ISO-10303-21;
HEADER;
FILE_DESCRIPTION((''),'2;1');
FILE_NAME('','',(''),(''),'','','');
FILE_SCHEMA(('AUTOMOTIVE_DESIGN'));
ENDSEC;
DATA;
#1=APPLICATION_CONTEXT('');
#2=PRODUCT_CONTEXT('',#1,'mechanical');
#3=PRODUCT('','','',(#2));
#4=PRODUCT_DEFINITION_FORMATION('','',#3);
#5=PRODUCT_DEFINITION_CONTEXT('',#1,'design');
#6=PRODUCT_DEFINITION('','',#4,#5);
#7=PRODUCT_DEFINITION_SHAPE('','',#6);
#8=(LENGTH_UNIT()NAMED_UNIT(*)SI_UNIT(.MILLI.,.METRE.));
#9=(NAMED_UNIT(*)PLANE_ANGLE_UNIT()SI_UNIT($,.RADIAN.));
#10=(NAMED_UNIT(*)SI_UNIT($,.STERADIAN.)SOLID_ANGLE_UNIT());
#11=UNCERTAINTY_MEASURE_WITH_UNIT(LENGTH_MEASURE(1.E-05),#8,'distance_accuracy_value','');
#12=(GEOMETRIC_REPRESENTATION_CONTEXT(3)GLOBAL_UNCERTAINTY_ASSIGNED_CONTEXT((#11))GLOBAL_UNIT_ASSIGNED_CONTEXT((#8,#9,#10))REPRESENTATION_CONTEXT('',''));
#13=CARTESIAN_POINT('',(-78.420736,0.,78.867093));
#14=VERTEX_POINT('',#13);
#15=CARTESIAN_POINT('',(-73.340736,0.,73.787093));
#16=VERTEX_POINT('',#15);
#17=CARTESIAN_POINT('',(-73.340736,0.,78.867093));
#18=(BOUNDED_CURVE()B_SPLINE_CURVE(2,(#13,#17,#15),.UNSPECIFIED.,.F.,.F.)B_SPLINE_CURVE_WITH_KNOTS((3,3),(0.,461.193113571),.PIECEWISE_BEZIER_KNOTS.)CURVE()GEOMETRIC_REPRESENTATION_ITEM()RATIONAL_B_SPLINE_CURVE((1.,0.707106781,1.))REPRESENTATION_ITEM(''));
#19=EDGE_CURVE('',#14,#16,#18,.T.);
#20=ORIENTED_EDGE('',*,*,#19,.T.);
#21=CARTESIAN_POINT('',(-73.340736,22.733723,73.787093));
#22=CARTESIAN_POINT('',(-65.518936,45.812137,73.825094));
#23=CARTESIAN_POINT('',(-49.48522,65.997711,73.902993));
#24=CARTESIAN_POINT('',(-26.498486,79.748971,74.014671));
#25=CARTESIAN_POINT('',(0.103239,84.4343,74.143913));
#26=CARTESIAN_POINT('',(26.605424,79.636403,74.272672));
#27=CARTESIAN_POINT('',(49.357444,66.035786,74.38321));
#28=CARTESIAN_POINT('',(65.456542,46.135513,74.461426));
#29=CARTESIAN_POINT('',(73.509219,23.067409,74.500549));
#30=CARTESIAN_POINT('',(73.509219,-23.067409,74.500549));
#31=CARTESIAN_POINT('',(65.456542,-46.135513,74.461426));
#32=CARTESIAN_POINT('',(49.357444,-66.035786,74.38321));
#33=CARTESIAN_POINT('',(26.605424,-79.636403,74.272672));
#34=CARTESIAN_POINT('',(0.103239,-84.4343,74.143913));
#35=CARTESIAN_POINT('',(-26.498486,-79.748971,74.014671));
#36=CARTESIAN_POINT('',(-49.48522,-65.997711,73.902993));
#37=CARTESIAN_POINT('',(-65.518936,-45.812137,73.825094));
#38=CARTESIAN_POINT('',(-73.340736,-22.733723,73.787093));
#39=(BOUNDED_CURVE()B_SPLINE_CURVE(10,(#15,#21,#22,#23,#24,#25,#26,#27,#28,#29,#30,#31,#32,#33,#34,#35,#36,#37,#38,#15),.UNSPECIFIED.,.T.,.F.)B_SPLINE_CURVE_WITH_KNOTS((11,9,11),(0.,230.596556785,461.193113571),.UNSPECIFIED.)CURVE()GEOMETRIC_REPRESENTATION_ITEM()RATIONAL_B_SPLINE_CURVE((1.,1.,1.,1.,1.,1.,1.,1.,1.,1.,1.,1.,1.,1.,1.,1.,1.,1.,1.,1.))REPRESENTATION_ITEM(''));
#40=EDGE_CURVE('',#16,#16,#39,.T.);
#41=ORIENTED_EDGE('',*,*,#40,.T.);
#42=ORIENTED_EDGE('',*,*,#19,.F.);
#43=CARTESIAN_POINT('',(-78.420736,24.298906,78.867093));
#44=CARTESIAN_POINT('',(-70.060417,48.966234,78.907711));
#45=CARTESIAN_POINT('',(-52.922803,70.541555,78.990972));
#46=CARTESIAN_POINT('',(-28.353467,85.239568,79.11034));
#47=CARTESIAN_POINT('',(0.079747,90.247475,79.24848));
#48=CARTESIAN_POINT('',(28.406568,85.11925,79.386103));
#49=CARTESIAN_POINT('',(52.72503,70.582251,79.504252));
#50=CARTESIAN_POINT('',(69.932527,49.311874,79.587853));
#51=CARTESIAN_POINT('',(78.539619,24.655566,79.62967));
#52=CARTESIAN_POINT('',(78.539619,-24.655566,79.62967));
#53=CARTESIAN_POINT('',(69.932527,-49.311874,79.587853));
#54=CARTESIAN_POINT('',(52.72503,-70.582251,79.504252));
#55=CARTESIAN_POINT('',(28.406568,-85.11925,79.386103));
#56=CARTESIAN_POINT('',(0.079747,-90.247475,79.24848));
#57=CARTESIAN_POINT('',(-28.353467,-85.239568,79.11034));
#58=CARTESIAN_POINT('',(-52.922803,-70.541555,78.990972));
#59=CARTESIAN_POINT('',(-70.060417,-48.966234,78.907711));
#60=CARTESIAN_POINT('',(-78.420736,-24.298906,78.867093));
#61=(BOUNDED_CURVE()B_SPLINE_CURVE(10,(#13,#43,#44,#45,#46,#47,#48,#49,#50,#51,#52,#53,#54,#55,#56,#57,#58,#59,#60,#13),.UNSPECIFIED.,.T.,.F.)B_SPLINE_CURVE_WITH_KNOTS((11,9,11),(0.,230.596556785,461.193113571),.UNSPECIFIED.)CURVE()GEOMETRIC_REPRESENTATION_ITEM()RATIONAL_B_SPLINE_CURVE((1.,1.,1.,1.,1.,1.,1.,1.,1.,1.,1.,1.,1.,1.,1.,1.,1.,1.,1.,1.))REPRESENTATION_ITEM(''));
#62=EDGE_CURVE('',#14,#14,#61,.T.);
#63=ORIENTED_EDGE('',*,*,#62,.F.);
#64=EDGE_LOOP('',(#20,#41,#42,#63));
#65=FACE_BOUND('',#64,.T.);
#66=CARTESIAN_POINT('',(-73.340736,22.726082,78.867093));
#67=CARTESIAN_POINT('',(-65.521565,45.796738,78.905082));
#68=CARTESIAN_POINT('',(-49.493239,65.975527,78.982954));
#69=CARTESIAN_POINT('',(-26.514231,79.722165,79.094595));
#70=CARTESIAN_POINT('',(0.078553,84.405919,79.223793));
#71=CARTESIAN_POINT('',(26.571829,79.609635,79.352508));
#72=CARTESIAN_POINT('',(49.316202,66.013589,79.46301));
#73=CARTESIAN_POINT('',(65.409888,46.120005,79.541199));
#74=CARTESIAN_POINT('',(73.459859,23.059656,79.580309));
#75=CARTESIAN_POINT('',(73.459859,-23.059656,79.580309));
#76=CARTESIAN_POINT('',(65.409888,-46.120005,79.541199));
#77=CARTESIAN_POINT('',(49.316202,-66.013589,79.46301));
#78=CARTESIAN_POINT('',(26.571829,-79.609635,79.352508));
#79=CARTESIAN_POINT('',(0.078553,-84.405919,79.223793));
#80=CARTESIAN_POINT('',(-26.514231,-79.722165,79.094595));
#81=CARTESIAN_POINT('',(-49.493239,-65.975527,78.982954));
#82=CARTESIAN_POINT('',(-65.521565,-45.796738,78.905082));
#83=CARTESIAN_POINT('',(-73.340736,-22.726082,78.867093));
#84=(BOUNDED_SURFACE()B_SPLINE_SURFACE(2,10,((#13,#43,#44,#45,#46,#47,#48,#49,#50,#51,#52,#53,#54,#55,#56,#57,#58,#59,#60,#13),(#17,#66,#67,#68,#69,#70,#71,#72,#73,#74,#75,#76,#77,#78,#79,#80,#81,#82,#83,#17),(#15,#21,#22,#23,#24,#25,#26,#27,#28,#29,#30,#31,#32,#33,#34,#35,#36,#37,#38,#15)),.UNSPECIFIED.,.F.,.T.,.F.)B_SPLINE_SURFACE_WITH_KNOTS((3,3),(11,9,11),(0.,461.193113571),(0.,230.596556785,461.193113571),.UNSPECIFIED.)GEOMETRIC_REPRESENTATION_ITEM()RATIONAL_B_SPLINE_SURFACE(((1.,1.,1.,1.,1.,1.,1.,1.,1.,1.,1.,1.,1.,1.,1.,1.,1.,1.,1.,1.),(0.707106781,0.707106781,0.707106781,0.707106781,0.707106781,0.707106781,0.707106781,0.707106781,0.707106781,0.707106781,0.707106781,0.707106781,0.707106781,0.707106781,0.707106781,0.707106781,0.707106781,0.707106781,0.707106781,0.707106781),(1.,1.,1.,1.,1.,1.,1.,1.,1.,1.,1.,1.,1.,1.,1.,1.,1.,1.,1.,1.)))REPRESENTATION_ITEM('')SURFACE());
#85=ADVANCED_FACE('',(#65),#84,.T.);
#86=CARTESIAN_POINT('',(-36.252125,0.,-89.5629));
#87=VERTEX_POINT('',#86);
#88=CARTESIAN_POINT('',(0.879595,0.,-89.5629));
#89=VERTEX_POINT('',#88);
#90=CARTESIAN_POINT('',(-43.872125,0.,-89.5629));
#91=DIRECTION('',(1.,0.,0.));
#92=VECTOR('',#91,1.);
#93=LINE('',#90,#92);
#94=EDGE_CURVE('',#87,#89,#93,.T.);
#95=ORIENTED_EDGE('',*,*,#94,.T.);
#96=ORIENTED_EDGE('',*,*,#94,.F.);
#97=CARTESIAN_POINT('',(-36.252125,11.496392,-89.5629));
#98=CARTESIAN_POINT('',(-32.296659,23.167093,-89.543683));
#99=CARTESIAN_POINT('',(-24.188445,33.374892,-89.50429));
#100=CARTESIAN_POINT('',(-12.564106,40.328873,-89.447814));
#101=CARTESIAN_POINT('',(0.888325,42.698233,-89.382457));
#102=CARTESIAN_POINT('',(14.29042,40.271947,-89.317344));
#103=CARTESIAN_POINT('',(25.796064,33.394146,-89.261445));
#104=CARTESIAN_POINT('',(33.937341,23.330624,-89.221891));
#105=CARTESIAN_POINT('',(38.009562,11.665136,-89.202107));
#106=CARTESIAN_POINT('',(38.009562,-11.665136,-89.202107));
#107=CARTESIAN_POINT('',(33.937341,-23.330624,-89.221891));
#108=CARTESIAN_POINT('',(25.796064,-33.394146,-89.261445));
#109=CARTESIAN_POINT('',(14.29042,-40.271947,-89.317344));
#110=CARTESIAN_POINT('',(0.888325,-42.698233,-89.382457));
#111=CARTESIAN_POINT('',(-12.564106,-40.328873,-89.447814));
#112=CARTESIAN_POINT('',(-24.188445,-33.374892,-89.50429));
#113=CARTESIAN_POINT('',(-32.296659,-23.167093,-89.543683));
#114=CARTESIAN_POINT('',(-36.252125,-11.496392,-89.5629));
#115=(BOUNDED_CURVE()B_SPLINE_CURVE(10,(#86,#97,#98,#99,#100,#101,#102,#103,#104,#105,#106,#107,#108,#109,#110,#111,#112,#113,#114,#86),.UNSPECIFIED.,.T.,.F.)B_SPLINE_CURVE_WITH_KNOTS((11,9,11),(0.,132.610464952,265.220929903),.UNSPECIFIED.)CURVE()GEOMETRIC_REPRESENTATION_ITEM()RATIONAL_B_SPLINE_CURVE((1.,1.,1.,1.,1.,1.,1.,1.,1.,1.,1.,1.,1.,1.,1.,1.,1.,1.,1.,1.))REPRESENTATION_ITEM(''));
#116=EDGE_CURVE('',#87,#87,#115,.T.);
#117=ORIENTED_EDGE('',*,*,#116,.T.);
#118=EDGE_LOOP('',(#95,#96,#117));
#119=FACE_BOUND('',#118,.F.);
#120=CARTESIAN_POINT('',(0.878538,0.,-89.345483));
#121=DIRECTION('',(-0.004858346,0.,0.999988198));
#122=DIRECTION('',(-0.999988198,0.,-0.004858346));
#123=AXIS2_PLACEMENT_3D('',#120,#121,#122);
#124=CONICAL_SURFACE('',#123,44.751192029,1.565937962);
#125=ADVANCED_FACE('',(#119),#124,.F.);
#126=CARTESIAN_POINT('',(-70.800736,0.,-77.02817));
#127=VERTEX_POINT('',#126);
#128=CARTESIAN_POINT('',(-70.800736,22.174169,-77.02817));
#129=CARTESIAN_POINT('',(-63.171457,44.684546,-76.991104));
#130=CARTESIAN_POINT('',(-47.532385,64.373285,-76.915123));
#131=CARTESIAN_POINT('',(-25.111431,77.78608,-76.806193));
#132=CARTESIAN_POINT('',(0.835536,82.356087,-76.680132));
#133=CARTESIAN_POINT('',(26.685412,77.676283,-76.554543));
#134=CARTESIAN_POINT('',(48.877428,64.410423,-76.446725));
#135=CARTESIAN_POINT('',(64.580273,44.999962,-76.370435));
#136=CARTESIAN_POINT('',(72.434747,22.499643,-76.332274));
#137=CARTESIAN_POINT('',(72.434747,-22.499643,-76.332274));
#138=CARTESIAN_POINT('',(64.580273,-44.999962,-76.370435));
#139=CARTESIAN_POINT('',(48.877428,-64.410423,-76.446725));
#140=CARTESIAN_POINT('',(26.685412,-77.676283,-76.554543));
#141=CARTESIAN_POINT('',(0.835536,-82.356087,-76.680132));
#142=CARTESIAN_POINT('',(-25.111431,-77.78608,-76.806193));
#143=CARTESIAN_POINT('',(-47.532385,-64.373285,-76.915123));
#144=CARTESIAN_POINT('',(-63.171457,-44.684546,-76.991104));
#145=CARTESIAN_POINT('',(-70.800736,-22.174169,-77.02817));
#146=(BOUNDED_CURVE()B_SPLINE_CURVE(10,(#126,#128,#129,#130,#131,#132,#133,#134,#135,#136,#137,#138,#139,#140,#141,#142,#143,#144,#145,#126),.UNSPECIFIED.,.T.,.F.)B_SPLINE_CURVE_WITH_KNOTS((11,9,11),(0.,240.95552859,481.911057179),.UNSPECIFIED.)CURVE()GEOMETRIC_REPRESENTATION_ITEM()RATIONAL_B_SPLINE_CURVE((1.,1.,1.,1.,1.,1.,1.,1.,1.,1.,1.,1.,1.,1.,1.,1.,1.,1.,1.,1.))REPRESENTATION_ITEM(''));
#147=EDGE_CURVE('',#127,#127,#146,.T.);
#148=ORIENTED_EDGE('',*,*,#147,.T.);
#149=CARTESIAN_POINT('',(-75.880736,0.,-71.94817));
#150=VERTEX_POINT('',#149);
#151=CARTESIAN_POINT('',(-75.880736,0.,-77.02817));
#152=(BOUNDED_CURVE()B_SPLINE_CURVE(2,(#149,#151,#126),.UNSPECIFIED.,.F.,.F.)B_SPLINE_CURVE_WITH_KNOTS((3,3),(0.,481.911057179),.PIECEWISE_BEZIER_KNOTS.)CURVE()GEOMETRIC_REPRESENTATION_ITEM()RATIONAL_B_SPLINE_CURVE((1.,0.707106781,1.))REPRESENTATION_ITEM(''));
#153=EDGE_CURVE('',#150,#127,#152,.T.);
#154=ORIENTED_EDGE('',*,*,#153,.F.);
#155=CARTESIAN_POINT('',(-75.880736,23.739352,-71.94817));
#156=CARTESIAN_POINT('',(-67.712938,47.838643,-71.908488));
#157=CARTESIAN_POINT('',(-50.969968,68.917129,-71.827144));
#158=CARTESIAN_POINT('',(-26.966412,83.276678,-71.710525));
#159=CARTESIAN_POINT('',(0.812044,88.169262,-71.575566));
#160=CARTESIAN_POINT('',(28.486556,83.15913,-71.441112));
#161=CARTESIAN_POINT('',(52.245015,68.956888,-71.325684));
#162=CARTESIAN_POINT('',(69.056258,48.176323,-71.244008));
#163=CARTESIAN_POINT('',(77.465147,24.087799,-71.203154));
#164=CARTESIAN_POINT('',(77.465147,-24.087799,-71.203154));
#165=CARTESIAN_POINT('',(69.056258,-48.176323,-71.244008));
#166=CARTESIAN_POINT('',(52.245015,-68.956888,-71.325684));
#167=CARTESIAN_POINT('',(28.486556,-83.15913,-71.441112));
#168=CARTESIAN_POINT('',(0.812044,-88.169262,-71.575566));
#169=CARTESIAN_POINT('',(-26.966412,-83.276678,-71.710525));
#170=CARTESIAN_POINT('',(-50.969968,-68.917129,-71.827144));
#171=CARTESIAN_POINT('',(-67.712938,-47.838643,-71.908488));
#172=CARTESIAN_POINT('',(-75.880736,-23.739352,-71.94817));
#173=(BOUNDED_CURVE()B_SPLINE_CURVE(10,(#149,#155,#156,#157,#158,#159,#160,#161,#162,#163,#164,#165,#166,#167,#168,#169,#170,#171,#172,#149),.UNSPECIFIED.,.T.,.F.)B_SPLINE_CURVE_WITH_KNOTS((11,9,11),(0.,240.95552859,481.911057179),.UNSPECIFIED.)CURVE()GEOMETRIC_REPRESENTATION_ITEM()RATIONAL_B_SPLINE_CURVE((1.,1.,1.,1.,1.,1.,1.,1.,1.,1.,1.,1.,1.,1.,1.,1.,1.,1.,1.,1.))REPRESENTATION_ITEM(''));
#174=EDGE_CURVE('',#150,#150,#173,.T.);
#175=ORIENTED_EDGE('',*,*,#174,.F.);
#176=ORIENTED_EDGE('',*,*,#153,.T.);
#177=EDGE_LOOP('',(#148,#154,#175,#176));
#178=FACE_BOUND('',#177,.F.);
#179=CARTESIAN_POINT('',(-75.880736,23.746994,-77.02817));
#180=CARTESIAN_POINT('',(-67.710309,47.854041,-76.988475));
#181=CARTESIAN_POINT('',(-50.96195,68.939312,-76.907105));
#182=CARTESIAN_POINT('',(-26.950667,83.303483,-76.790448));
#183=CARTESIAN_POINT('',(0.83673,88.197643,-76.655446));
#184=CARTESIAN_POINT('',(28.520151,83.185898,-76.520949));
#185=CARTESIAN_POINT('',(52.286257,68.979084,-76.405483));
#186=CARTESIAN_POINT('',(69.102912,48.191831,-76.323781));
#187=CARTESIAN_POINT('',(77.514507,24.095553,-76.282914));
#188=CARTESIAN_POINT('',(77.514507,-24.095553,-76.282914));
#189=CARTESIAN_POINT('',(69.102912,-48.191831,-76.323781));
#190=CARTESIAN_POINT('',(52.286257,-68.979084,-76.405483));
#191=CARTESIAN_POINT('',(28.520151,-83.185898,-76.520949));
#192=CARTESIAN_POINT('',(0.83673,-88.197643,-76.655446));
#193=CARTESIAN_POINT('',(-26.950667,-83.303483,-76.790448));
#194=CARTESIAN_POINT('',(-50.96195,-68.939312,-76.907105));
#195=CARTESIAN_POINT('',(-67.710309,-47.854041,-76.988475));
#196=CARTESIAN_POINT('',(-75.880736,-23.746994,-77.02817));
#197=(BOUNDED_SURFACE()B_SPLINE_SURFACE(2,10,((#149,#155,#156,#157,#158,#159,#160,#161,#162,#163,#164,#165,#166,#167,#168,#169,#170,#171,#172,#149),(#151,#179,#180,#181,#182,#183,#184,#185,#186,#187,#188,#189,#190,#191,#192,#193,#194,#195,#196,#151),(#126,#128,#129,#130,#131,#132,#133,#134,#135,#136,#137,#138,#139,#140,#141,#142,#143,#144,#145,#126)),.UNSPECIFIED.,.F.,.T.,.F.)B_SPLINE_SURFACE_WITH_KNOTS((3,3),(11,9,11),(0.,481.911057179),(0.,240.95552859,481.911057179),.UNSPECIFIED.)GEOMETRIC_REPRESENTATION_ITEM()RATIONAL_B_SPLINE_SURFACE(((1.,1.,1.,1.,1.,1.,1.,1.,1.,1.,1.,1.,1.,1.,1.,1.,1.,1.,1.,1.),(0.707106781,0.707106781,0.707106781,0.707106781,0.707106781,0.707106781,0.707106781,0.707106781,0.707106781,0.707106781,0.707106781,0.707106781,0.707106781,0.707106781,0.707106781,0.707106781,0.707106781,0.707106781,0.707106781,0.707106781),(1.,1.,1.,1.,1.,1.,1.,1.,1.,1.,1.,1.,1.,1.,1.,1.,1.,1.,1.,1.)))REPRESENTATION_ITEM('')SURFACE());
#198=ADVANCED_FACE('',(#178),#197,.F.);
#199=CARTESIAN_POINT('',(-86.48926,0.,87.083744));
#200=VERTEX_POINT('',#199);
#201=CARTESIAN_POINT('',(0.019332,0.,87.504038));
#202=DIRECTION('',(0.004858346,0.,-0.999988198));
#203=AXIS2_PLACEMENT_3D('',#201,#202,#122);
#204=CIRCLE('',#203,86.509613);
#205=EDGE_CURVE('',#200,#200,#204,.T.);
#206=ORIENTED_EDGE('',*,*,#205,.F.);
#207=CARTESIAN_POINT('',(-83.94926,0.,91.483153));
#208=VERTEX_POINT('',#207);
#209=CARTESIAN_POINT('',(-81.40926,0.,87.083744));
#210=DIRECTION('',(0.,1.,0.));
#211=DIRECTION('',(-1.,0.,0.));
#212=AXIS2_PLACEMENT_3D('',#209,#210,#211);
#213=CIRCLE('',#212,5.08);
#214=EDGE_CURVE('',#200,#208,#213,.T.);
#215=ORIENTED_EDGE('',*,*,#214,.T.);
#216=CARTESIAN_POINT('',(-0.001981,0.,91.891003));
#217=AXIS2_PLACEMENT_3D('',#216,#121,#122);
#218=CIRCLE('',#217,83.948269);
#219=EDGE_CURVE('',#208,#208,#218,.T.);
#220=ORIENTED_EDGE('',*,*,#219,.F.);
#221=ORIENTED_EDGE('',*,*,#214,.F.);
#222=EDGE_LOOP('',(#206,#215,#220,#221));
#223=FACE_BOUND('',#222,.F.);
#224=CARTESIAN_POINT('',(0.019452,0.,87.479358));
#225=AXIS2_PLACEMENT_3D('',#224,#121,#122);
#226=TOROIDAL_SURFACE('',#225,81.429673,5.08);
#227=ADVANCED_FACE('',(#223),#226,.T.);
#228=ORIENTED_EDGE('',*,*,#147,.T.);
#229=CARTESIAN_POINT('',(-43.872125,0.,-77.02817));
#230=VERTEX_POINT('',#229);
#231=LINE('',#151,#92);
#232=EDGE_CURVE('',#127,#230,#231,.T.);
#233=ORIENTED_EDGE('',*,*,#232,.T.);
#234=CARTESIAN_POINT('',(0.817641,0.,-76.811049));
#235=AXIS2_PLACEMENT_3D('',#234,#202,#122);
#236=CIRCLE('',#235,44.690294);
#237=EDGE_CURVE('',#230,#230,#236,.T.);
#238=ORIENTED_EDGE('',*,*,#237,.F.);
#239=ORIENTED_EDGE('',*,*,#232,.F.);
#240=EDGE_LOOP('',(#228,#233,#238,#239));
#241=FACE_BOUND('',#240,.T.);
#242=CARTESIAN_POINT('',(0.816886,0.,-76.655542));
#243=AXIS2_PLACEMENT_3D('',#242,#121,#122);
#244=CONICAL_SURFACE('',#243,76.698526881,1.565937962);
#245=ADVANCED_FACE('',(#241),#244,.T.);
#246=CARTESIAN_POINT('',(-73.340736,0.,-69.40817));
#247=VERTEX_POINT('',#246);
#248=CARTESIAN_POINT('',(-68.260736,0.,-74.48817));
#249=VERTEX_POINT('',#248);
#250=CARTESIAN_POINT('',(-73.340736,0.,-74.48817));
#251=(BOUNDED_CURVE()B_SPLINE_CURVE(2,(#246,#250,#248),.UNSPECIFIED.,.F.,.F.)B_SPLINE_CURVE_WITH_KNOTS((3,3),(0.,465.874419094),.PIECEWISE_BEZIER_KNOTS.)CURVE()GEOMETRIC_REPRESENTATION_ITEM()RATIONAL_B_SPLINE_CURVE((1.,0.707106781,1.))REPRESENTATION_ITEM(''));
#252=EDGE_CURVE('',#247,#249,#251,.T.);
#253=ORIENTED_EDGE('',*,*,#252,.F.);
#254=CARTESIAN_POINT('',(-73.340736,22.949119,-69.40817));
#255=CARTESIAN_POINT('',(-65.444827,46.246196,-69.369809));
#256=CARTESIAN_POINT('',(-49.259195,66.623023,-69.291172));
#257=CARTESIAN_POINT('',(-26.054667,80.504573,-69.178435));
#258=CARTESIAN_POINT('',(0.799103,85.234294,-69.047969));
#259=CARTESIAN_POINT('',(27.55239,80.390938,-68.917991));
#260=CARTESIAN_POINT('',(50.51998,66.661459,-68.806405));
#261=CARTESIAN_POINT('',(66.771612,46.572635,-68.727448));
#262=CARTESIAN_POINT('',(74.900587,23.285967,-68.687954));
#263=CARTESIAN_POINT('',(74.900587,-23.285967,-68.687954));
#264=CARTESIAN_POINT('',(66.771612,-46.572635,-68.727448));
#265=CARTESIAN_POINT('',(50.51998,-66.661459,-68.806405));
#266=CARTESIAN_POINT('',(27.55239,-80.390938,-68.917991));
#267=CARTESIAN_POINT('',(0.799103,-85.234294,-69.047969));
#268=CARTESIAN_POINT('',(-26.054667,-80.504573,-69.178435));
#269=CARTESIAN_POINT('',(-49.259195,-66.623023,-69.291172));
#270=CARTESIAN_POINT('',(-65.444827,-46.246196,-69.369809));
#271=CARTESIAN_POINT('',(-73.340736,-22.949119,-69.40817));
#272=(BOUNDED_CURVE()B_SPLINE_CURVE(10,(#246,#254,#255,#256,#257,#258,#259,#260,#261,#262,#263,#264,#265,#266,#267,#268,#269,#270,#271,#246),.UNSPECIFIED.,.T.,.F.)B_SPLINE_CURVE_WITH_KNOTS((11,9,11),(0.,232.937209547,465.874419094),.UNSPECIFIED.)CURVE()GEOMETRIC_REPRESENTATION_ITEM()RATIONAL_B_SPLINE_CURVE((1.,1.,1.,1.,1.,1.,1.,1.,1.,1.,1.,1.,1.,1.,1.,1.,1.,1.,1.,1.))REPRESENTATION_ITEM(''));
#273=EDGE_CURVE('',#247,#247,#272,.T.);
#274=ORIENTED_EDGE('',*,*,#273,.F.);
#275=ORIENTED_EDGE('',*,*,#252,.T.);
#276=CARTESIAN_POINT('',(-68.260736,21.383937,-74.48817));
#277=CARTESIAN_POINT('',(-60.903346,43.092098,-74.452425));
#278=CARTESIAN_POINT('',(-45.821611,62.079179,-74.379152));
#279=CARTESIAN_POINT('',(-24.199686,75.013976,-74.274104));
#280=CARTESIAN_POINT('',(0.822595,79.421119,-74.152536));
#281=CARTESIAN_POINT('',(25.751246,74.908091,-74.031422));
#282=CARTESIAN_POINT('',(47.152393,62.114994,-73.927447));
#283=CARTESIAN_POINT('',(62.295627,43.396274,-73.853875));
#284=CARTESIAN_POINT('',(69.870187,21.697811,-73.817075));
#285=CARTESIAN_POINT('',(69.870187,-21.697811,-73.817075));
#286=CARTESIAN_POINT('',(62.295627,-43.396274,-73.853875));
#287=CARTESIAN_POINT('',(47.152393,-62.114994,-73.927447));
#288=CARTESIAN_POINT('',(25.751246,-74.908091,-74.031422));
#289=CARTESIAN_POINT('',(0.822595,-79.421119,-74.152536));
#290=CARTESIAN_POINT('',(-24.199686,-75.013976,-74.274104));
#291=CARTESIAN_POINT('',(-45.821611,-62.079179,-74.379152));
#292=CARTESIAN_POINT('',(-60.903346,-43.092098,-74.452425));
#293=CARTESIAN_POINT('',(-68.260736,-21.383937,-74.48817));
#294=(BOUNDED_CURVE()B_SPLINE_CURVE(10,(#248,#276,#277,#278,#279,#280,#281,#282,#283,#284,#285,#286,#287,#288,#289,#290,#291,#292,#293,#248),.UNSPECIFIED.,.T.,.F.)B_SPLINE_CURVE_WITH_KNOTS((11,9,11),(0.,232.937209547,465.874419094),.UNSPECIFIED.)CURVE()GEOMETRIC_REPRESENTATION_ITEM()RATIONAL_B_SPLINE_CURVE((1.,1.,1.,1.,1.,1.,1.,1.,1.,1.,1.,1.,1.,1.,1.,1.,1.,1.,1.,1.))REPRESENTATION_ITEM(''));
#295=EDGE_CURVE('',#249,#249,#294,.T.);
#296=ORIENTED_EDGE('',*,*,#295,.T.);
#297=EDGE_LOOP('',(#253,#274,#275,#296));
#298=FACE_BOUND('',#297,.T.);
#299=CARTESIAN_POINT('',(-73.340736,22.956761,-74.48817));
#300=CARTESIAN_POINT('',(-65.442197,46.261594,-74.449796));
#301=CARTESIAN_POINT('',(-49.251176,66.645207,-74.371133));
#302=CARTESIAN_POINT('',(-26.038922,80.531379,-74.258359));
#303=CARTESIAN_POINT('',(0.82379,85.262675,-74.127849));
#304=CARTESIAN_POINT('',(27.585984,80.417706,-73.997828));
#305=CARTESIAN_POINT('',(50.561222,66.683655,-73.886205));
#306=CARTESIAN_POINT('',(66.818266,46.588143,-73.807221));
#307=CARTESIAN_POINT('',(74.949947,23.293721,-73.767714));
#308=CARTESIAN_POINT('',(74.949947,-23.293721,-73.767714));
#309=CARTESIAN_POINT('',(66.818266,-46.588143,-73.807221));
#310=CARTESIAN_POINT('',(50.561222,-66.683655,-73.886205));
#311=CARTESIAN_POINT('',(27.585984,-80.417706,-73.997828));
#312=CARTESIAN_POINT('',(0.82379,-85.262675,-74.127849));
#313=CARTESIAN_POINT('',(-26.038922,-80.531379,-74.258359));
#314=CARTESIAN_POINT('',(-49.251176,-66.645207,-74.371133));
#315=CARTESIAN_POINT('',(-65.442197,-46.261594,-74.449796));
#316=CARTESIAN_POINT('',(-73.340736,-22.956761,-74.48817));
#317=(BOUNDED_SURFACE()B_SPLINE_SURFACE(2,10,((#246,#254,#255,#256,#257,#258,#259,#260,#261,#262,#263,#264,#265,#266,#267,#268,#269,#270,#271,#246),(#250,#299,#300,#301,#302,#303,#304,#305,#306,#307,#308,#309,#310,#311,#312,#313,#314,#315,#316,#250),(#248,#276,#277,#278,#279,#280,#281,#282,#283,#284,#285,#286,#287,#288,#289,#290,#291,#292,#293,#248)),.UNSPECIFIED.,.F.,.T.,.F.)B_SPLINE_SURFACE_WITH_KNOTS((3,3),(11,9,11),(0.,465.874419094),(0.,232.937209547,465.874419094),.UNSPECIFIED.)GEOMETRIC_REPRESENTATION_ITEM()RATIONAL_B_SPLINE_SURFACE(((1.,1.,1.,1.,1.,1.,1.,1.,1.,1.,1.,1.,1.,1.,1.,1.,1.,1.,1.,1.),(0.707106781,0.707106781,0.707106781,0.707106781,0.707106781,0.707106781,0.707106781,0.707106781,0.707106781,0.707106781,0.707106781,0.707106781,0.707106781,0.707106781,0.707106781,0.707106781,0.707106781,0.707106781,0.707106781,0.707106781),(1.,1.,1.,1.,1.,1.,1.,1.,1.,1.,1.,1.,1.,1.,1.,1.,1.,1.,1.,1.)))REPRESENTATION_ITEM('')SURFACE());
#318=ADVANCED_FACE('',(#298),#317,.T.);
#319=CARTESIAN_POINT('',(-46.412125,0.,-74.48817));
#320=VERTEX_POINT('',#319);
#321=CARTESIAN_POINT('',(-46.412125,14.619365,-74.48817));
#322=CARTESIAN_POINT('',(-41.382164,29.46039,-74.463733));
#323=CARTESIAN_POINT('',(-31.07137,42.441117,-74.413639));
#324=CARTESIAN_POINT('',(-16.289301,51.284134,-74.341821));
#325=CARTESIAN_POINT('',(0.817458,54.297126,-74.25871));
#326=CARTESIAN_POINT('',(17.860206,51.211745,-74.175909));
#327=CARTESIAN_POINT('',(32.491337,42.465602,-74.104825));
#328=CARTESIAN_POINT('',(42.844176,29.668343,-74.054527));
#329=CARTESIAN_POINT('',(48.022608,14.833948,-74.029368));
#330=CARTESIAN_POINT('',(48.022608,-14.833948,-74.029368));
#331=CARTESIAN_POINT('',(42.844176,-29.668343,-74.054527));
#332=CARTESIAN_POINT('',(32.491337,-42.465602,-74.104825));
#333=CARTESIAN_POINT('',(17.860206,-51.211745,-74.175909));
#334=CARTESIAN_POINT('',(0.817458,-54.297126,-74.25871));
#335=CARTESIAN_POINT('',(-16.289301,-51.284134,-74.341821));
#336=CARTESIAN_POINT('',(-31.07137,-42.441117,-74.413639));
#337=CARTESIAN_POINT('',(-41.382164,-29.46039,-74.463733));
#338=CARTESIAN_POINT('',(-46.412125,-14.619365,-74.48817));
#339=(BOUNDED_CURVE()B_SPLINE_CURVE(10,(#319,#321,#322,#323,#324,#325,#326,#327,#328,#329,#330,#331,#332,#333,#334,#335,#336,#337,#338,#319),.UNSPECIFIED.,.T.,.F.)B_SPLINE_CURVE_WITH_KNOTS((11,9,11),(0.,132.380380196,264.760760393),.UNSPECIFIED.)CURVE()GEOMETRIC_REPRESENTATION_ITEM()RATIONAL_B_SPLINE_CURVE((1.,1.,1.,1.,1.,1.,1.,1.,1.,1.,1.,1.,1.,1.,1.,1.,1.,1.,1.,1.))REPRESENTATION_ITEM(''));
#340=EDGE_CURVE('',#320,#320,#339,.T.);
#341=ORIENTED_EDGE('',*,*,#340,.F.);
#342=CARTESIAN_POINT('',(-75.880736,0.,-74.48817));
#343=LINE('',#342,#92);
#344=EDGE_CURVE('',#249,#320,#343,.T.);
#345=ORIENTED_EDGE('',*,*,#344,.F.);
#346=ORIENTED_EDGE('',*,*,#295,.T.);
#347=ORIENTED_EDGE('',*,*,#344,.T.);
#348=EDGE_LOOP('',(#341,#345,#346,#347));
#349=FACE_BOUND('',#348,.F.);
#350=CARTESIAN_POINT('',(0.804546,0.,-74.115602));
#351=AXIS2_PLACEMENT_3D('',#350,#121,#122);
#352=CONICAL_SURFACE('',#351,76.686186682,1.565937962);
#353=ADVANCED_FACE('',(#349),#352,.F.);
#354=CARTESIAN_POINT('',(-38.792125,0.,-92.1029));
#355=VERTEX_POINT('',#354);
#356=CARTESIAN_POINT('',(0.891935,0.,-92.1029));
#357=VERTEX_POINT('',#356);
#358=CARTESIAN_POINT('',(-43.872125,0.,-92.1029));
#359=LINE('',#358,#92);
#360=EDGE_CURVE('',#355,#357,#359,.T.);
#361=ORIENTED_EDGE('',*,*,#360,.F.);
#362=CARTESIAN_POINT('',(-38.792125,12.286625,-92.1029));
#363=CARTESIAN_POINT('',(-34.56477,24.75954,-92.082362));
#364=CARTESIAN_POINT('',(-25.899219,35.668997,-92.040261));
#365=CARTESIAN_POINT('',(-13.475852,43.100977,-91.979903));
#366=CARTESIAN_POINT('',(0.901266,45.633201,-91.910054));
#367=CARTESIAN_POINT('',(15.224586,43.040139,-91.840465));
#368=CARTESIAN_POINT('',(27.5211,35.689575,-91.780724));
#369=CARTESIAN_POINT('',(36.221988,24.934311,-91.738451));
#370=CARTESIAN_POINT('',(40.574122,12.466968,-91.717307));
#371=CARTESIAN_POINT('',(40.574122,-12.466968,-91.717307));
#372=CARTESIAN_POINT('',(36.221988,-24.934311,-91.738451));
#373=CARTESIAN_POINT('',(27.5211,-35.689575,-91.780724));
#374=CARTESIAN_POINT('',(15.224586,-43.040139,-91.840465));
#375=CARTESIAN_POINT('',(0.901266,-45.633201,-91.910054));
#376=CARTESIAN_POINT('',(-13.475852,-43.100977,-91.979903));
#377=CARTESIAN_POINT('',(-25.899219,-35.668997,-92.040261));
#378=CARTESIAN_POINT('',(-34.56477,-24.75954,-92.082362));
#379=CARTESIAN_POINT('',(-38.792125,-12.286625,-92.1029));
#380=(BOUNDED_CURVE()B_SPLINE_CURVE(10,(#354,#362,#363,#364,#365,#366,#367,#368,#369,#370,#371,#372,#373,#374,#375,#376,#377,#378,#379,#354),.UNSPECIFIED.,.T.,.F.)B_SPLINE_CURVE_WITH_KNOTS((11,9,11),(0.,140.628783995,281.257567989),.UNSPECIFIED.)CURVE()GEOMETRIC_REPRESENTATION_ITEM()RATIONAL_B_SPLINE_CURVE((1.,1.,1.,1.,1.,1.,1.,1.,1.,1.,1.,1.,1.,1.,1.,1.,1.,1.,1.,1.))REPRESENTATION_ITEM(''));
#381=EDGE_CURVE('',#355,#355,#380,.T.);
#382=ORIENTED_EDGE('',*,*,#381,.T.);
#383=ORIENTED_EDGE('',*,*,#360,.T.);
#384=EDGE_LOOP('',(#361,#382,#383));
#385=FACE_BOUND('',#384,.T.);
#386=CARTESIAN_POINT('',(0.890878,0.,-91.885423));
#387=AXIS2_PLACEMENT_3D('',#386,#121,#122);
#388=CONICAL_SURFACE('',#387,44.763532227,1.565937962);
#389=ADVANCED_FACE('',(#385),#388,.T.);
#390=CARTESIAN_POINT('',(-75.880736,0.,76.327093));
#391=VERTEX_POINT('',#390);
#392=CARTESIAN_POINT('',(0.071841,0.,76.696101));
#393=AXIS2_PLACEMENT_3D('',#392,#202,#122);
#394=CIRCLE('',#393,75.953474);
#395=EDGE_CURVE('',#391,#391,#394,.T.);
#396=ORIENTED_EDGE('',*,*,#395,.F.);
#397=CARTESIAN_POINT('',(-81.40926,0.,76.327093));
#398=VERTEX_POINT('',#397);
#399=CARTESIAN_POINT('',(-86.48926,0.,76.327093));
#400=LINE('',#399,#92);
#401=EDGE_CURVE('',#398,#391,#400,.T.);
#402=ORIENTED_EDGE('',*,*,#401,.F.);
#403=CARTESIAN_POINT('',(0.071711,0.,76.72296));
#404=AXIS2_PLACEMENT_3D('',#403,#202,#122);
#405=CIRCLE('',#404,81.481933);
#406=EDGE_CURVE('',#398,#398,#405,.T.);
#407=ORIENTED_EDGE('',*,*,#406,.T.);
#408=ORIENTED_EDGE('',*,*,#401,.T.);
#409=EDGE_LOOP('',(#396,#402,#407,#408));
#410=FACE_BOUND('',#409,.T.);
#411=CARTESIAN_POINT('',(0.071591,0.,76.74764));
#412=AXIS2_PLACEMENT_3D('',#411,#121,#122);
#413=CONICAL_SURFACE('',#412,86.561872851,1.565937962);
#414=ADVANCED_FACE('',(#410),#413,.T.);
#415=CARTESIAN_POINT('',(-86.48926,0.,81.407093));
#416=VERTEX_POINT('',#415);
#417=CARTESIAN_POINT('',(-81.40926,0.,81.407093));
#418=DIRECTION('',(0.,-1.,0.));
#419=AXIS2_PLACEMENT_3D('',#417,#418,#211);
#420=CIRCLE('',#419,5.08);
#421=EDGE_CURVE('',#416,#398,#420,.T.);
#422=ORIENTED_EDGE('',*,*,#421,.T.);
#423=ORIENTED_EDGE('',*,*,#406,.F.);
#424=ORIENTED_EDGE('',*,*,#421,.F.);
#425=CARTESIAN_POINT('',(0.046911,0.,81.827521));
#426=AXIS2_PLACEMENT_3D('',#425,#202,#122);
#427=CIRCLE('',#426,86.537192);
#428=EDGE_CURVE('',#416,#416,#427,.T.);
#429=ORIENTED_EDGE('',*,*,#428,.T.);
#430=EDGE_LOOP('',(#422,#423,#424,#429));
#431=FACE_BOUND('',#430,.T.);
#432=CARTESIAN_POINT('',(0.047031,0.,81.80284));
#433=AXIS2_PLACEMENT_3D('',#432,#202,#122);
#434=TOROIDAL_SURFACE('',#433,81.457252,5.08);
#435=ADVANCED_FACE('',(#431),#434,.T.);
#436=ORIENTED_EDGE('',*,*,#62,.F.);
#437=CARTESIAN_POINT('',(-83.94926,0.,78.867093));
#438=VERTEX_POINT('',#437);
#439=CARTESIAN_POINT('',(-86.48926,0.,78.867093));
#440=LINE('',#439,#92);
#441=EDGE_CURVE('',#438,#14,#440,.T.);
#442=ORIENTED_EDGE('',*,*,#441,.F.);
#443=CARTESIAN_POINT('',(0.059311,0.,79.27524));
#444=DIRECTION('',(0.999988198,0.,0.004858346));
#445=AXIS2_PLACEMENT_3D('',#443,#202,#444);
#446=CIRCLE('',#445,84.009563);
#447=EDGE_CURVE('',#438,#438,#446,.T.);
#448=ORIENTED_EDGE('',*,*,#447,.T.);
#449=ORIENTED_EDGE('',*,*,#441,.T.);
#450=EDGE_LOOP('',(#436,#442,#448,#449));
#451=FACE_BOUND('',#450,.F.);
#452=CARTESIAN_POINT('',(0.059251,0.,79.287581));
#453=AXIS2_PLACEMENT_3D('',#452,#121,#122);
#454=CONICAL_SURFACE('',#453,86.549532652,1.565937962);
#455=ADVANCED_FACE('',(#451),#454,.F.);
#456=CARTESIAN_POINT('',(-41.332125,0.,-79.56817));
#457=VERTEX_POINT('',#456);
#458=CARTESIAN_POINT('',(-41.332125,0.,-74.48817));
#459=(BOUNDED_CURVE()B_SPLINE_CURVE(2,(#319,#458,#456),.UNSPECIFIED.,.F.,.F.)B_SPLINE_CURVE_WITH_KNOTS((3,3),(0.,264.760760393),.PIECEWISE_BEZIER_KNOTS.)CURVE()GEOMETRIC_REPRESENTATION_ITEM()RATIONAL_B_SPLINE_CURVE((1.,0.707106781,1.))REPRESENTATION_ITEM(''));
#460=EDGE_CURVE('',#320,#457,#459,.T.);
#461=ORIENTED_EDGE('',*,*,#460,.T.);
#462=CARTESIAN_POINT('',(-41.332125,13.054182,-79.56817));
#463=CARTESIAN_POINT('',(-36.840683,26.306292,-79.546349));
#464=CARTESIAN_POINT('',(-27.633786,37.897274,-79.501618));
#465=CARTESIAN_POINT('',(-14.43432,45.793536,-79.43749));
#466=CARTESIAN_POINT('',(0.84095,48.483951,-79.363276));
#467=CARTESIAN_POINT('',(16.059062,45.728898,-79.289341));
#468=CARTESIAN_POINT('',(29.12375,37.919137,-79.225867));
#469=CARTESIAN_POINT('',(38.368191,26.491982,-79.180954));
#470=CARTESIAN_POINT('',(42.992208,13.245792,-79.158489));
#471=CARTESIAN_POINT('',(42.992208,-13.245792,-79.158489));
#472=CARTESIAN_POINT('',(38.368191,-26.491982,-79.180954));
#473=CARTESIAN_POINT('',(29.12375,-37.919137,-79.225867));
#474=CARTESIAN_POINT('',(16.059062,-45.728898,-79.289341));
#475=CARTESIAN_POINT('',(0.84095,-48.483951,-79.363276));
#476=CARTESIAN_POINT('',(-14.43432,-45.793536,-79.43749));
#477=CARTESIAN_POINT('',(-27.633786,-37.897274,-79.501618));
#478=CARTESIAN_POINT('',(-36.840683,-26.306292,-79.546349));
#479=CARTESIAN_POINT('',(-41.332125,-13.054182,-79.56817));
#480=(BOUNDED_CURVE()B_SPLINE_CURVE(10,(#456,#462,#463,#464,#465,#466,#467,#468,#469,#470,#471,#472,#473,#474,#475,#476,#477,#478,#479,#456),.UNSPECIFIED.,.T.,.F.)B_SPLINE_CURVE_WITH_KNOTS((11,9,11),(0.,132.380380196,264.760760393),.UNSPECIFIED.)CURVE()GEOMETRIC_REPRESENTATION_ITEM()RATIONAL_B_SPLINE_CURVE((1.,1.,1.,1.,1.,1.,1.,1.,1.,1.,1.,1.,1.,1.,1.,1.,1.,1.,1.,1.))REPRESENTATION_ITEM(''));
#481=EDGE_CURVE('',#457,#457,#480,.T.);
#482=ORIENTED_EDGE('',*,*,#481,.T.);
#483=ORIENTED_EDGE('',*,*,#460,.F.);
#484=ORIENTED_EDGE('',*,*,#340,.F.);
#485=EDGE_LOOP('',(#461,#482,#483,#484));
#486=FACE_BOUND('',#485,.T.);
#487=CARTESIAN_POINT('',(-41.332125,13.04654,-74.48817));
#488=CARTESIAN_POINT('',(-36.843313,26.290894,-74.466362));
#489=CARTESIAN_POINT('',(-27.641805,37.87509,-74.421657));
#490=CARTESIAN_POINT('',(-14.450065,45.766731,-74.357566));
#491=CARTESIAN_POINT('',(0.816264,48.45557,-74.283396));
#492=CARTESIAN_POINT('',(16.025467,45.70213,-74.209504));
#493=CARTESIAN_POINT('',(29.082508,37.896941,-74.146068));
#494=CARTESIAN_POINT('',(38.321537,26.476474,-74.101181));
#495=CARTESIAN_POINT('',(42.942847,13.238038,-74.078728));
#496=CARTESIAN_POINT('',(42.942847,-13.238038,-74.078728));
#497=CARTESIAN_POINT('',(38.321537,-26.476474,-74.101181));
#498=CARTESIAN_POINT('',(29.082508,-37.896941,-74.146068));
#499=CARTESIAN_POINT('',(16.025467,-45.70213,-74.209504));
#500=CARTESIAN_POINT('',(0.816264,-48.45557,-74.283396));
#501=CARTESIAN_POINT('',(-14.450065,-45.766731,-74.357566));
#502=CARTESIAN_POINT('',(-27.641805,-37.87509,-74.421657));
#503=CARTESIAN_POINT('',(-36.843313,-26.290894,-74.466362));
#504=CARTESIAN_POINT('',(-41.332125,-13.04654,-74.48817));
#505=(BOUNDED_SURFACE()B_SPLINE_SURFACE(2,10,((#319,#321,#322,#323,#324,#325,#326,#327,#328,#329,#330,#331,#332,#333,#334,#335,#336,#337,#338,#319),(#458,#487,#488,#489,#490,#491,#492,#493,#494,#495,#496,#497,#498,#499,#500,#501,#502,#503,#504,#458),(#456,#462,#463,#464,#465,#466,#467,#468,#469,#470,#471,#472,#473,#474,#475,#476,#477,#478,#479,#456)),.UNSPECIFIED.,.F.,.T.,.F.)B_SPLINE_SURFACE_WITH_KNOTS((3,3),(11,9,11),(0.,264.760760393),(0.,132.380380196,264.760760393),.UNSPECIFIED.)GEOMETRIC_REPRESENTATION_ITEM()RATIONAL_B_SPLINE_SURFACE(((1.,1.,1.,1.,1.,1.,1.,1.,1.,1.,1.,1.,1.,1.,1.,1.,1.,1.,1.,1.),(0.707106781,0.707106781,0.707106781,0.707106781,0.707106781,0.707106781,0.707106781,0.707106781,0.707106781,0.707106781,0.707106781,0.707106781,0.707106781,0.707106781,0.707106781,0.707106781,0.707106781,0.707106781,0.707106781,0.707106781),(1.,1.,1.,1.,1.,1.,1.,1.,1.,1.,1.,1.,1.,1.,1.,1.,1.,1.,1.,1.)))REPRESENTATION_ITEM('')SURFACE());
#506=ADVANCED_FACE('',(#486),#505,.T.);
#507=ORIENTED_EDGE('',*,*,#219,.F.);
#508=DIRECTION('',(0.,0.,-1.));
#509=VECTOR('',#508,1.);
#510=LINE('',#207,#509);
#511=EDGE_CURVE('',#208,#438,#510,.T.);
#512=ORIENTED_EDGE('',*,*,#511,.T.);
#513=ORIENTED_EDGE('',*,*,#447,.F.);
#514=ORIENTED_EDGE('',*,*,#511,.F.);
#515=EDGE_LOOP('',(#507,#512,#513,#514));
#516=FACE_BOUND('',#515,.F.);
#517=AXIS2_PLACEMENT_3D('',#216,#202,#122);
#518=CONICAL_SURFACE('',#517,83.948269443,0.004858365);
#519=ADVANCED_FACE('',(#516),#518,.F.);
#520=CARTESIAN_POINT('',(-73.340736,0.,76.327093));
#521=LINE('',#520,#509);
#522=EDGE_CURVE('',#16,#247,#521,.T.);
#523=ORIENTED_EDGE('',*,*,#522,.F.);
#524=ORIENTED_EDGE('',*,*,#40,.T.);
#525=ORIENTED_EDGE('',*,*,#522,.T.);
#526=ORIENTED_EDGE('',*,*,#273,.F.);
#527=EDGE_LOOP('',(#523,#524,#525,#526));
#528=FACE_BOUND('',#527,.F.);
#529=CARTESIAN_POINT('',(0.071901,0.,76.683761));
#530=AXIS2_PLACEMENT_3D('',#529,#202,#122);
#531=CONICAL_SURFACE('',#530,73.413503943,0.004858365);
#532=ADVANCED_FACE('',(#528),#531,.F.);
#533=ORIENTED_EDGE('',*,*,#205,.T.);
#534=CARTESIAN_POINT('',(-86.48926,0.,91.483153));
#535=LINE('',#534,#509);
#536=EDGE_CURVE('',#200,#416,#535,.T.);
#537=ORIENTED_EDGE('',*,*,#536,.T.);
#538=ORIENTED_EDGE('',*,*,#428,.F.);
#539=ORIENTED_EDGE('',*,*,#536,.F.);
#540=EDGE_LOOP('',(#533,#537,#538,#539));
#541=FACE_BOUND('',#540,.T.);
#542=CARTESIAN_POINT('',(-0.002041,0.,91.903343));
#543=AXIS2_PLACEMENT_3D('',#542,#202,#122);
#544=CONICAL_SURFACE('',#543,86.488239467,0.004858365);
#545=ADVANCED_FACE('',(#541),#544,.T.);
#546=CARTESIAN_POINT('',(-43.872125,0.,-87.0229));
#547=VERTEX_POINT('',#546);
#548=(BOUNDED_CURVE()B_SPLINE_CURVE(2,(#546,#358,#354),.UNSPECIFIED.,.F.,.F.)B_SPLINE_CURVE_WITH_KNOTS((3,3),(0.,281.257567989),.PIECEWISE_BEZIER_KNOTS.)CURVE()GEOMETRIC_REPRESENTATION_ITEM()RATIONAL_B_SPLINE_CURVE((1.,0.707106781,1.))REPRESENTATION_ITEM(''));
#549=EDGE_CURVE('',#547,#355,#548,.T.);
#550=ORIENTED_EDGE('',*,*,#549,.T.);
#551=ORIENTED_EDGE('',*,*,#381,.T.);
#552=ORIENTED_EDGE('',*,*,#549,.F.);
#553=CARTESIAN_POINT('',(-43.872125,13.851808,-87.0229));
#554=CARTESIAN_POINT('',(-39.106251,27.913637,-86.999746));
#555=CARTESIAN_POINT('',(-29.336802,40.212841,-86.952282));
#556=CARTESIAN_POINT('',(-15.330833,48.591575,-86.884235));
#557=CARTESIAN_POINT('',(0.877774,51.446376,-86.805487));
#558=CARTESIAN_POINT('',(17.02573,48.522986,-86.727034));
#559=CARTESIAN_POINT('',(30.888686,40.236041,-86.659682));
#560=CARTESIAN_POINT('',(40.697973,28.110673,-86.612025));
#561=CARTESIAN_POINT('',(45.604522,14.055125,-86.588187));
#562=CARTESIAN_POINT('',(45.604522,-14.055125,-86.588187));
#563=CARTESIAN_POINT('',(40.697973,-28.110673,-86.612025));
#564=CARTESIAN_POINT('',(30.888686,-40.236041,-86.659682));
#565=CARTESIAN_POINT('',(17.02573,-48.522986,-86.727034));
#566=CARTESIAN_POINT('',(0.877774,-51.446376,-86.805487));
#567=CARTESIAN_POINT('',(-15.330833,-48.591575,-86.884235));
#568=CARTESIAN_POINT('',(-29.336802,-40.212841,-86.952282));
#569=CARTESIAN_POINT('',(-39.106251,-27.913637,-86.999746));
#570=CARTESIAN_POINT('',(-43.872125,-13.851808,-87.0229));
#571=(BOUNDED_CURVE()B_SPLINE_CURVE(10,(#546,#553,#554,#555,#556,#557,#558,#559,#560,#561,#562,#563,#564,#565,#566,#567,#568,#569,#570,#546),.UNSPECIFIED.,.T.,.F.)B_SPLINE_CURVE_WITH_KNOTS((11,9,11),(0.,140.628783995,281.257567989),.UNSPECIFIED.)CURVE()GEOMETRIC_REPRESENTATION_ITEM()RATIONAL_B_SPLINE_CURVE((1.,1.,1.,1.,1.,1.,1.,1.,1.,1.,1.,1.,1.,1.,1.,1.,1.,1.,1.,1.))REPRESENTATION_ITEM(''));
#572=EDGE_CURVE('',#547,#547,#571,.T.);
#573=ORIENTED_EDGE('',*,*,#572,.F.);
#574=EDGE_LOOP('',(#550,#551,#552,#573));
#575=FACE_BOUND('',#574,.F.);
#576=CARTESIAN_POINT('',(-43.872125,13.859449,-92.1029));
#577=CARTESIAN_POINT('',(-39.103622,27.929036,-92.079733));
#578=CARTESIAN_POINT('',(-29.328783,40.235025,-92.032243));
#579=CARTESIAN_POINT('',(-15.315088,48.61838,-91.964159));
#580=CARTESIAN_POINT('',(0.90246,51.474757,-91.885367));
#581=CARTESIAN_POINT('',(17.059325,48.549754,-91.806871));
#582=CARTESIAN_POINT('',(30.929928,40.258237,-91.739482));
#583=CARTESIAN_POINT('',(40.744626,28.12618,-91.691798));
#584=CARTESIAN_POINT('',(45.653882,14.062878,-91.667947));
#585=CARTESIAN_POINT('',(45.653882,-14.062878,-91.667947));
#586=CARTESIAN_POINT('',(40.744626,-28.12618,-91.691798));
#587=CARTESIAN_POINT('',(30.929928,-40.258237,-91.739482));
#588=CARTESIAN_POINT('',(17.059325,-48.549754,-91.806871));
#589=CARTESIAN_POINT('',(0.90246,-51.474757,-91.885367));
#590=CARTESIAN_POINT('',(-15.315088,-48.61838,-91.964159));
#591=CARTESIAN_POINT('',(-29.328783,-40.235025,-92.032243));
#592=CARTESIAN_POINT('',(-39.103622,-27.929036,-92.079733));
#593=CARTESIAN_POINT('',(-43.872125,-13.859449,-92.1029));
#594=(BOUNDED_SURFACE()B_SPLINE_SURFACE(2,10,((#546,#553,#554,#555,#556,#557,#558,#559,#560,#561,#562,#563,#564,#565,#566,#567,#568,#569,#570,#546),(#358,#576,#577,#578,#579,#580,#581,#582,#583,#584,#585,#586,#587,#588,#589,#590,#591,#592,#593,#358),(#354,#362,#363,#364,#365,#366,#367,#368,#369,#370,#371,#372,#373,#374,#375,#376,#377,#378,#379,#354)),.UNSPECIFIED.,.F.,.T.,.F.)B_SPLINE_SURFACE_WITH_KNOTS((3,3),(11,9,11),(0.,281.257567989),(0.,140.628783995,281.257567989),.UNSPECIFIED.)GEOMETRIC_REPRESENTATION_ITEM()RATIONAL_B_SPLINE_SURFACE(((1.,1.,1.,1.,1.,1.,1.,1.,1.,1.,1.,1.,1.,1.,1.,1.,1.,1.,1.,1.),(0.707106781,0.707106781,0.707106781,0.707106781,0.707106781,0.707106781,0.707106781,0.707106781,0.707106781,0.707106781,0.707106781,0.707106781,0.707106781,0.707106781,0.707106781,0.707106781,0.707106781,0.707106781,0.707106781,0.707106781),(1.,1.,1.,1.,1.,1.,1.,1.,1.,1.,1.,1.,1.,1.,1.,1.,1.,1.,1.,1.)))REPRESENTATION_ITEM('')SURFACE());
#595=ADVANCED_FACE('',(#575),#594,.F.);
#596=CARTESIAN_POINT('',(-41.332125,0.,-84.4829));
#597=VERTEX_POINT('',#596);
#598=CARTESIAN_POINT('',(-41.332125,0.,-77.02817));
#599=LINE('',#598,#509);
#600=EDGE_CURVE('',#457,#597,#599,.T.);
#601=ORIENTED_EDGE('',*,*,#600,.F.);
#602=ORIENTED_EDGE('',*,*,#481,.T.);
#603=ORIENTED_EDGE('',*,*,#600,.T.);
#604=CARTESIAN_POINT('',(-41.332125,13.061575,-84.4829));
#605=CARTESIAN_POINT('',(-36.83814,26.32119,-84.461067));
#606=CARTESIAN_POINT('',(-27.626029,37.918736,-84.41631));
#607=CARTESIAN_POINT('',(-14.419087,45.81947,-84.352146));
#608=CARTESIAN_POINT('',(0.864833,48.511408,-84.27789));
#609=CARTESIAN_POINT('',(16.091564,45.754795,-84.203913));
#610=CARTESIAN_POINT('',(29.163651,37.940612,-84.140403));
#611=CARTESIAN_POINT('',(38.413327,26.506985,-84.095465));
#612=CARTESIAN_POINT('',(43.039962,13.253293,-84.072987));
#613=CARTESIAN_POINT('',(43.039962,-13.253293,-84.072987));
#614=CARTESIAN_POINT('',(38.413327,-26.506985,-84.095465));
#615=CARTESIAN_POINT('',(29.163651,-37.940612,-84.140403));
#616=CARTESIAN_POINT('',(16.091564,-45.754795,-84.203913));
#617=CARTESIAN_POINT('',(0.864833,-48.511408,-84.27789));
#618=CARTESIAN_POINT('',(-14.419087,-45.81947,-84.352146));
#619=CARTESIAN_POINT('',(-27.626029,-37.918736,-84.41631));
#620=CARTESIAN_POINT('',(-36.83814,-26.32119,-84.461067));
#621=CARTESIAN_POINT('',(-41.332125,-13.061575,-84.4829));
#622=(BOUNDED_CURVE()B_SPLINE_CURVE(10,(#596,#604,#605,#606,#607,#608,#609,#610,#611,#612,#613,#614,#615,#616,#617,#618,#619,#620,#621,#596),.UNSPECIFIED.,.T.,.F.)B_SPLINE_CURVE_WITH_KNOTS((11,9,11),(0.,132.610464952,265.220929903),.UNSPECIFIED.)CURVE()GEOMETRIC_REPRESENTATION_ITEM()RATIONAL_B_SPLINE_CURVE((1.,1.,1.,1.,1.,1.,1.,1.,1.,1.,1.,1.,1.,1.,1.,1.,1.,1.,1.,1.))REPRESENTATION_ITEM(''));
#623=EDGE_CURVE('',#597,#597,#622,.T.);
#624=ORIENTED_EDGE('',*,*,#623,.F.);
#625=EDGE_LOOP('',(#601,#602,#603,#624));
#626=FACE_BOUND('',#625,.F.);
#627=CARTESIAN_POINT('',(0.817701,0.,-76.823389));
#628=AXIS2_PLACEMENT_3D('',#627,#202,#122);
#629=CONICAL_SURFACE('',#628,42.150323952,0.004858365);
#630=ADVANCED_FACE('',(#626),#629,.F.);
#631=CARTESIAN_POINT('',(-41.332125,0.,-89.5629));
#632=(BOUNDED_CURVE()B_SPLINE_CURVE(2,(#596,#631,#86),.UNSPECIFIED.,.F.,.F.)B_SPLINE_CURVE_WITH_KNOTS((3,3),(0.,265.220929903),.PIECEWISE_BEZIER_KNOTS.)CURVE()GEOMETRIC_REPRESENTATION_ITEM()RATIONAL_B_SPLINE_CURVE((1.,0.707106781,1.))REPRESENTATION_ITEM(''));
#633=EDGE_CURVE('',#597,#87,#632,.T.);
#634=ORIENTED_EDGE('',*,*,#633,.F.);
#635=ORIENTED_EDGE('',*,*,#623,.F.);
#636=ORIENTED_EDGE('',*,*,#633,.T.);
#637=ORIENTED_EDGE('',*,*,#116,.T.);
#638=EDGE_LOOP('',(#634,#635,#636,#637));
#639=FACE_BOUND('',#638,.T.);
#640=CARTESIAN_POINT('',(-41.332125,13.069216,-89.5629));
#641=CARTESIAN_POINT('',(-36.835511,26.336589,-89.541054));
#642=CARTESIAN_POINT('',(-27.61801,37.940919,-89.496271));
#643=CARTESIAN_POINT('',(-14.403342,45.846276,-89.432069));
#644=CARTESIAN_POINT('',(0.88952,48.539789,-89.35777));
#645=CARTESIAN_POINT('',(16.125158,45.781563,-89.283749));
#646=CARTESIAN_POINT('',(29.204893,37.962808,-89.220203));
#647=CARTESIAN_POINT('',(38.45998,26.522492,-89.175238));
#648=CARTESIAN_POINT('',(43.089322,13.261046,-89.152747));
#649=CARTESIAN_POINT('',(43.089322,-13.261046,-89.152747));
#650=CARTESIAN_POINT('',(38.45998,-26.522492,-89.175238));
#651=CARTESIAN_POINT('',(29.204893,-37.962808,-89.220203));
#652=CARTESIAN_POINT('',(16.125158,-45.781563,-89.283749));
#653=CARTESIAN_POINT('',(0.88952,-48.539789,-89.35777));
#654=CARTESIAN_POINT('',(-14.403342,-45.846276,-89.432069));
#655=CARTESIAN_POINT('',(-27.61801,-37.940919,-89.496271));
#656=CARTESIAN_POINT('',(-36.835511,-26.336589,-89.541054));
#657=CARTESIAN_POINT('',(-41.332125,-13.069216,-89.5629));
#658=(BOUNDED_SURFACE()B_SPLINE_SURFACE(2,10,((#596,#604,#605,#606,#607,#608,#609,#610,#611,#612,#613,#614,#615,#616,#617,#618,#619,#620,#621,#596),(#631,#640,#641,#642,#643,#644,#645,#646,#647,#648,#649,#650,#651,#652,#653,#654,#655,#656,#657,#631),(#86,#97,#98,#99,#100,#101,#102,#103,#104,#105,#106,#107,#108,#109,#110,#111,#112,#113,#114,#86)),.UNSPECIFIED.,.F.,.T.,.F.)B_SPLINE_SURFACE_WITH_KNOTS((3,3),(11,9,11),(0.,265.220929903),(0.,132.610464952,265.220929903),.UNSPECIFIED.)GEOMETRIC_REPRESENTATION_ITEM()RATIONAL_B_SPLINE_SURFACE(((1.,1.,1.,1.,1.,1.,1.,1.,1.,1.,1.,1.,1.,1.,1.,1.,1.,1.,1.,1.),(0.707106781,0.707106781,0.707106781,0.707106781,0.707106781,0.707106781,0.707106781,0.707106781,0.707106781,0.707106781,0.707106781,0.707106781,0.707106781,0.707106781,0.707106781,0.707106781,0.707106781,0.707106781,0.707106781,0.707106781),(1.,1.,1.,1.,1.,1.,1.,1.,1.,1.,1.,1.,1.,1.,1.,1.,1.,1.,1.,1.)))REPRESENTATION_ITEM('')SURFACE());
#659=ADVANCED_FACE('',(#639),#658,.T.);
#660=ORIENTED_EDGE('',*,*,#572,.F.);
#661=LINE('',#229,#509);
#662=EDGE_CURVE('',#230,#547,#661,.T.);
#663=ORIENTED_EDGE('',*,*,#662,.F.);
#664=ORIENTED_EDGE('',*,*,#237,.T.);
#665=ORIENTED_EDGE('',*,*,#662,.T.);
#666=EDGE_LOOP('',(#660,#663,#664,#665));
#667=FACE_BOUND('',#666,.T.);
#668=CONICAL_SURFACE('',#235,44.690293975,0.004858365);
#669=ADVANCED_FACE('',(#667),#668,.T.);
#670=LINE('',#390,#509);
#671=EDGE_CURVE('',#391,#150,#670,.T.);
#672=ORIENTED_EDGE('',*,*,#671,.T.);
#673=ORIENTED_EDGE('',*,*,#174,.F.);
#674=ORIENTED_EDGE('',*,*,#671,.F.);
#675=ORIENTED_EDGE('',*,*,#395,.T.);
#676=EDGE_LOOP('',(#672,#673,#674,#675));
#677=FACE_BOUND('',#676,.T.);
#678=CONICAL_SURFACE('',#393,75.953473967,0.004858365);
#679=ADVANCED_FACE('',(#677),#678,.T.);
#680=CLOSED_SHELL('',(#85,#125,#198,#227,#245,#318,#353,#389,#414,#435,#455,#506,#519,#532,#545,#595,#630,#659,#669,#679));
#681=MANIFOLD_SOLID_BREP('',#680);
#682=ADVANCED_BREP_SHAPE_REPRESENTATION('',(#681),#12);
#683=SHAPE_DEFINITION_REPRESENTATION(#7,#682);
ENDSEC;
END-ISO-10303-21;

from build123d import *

# Parameters (mm, degrees)
F2_T = -2.54
F4_R = 5.08
F5_R = 5.08


# Not quite as in the source:
# - a fillet or chamfer that OpenCascade refuses, or shapes differently, is made with other operations: its cross-section is extruded or revolved along the edge and cut away or added
# - a feature of the source that left no trace in its solid (it failed there, or was rolled back) is left out


with BuildPart() as f1:
    # F0 (on Front) → F1 (revolve)
    with BuildSketch(Plane.XZ):
        Polygon((0.8919350803, -92.1029001474), (0.8186959634, -77.028170228), (-43.8721254468, -77.028170228), (-43.8721254468, -92.1029001474), align=None)
        Polygon((0.0736342535, 76.3270929456), (-75.8807361126, 76.3270929456), (-75.8807361126, -77.028170228), (-43.8721254468, -77.028170228), (0.8186959634, -77.028170228), align=None)
        Polygon((-86.4892601967, 76.3270929456), (-75.8807361126, 76.3270929456), (0.0736342535, 76.3270929456), (0, 91.4831534028), (-86.4892601967, 91.4831534028), align=None)
    revolve(axis=Axis((0.4459675401, 0, -0.3098733723), (0.0048583459, 0, -0.9999881982)))

    # F2
    f2_openings = [f1.faces().sort_by_distance(p)[0] for p in [
        (43.242589, 0, 91.903343),
    ]]
    offset(amount=F2_T, openings=f2_openings, kind=Kind.INTERSECTION)

    # F3: fillet of radius 5.08 on 2 edges, made by hand

    # F3_s1 → F3_t2 (revolve, cut)
    with BuildSketch(Plane.XZ):
        with BuildLine():
            ThreePointArc((-86.4892601967, 87.0837443516), (-85.8086692479, 89.6237443516), (-83.9492601967, 91.4831534028))
            Line((-83.9492601967, 91.4831534028), (-86.4892601967, 91.4831534028))
            Line((-86.4892601967, 91.4831534028), (-86.4892601967, 87.0837443516))
        make_face()
    revolve(axis=Axis((-0.0020414514, 0, 91.9033431879), (0.0048583459, 0, -0.9999881982)), mode=Mode.SUBTRACT)

    # F3_s3 → F3_t4 (revolve, cut)
    with BuildSketch(Plane.XZ):
        with BuildLine():
            ThreePointArc((-86.4892601967, 81.4070929456), (-85.0013626451, 77.8149904971), (-81.4092601967, 76.3270929456))
            Line((-81.4092601967, 76.3270929456), (-86.4892601967, 76.3270929456))
            Line((-86.4892601967, 76.3270929456), (-86.4892601967, 81.4070929456))
        make_face()
    revolve(axis=Axis((0.071591064, 0, 76.7476404672), (0.0048583459, 0, -0.9999881982)), mode=Mode.SUBTRACT)

    # F4
    f4_edges = [f1.edges().sort_by_distance(p)[0] for p in [
        (77.514507, 0, -76.282914),
        (45.653882, 0, -91.667947),
    ]]
    fillet(f4_edges, radius=F4_R)

    # F5
    f5_edges = [f1.edges().sort_by_distance(p)[0] for p in [
        (73.459859, 0, 79.580309),
        (74.949947, 0, -73.767714),
        (42.942847, 0, -74.078728),
        (43.089322, 0, -89.152747),
    ]]
    fillet(f5_edges, radius=F5_R)


solid = f1.part
